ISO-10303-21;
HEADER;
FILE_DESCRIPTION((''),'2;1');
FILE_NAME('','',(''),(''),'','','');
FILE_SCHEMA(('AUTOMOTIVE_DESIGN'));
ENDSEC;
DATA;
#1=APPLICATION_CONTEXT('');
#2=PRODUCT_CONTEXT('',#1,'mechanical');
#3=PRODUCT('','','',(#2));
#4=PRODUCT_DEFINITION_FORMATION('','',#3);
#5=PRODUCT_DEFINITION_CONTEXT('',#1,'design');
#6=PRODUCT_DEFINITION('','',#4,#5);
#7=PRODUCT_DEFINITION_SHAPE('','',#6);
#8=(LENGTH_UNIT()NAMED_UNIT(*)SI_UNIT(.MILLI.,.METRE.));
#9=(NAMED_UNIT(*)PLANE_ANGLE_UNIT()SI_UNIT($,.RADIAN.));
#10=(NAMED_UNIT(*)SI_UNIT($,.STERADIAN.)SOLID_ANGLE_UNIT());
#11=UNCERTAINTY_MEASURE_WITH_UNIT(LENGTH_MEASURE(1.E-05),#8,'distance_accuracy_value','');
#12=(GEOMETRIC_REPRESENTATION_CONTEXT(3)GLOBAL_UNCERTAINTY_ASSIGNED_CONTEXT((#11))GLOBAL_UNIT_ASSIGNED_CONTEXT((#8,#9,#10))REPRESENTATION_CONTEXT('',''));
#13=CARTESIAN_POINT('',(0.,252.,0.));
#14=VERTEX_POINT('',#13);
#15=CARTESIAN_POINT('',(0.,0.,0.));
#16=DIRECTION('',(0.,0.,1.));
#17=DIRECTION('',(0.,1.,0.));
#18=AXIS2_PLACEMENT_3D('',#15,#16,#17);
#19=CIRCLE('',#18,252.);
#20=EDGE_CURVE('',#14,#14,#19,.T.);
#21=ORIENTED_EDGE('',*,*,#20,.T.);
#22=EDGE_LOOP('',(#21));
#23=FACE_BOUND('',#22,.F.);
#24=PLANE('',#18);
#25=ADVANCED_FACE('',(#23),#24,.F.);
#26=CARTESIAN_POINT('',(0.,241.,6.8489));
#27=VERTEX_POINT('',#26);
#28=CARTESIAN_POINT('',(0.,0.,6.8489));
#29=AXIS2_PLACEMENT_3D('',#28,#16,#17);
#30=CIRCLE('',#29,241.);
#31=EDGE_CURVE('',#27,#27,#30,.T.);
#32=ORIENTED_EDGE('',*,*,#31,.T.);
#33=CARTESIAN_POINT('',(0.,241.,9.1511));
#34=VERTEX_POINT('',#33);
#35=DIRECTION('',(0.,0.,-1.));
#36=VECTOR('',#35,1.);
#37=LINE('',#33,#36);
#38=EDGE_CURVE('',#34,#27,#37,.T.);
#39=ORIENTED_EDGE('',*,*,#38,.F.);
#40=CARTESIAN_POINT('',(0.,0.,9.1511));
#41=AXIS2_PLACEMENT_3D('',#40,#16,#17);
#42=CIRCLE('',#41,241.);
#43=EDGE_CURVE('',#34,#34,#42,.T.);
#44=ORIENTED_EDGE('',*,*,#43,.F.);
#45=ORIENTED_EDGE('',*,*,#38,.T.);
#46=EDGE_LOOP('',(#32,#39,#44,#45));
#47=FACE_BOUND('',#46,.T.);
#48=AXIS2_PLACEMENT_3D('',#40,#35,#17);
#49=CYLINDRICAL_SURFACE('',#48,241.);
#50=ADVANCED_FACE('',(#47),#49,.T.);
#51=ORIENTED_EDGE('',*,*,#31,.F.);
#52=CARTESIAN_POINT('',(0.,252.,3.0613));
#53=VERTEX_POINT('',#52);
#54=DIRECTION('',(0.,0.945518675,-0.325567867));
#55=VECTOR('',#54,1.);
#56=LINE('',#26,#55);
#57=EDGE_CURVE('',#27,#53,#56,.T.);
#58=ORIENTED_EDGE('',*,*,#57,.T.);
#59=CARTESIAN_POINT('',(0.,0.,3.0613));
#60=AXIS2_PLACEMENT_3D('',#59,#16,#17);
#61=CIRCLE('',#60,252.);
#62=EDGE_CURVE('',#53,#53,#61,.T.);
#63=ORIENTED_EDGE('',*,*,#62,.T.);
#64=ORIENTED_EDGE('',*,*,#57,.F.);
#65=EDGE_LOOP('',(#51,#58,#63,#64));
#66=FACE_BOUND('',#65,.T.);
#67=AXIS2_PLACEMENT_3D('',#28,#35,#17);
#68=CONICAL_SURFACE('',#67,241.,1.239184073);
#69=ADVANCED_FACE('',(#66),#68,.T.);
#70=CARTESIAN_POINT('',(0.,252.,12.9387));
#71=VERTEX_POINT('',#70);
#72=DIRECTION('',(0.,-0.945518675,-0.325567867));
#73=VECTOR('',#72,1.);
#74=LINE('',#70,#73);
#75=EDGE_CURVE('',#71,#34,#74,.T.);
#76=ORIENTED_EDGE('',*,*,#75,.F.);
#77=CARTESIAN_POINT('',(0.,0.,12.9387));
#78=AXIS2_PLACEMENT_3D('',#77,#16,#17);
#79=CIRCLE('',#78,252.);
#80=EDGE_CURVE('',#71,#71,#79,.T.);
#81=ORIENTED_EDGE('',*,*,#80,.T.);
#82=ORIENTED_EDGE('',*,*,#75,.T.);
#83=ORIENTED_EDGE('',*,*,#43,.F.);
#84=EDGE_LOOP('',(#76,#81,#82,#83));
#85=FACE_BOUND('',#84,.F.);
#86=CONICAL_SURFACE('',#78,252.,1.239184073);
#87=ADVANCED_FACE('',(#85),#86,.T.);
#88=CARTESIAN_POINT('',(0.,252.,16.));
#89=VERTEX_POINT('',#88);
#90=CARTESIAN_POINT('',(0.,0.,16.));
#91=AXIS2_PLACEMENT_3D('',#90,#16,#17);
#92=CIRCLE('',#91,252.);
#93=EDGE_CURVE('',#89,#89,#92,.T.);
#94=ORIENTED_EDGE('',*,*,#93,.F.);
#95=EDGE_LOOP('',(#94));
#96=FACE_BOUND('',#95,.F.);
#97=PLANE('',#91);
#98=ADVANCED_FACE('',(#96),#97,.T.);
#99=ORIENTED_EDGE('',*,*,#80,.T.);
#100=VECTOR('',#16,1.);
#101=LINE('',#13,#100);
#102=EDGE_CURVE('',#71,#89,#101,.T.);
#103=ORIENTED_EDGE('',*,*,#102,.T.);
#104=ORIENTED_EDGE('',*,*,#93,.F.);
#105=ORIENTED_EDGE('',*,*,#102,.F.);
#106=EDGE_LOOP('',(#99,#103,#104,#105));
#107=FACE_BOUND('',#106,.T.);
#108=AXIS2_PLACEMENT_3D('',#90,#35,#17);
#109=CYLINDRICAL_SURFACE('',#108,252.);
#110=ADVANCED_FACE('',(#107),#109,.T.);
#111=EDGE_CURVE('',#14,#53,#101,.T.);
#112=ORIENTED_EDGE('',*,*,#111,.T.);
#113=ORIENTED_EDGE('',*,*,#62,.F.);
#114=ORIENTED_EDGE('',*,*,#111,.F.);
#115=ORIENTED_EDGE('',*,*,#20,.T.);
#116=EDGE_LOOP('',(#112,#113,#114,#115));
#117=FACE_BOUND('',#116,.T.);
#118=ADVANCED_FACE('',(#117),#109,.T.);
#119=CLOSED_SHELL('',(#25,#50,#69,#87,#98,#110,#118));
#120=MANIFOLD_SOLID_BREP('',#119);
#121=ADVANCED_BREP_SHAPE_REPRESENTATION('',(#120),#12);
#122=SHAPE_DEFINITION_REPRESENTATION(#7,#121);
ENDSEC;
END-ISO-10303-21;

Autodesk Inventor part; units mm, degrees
ref_plane "YZ Plane" through (0, 0, 0) normal (1, 0, 0) x (0, 1, 0)
ref_plane "XZ Plane" through (0, 0, 0) normal (0, 1, 0) x (-1, 0, 0)
sketch "Main Sketch" plane through (0, 0, 0) normal (1, 0, 0) x (0, 1, 0)
  line L0 (0, 16) -> (252, 16)
  line L1 (252, 16) -> (252, 12.9387)
  line L2 (252, 12.9387) -> (241, 9.1511)
  line L3 (241, 9.1511) -> (241, 6.8489)
  line L4 (241, 6.8489) -> (252, 3.0613)
  line L5 (252, 3.0613) -> (252, 0)
  line L6 (252, 0) -> (0, 0)
  line L7 (250, 12.25) -> (250, 3.75) construction
  line L8 (241, 8) -> (250, 8) construction
  line L9 (252, 12.9387) -> (252, 3.0613)
  line L10 (0, -4) -> (0, 24) projected
  line L11 (0, 0) -> (0, 16)
  dimension "d0" = 8.5
  dimension "d1" = 38
  dimension "d2" = 2
  dimension "d6" = 16
  dimension "d21" = 500
  dimension "d25" = 11
  dimension "d27" = 8
ref_plane "Belt Plane" through (0, 241, 8) normal (0, 0, 1) x (1, 0, 0)
revolve "Body" add sketch "Main Sketch" angle 360 about axis through (0, 0, -10) along (0, 0, 1)
revolve "Groove" cut sketch "Main Sketch" angle 360 about axis through (0, 0, -10) along (0, 0, 1) contours L9 L4 L3 L2
fillet "Fillet External" [suppressed]
fillet "Fillet Internal" [suppressed]
pattern_of_one "Groove Pattern"
equation "\"d0\" = da_Bw"
equation "\"d1\" = da_Alfa"
equation "\"d2\" = da_c"
equation "\"d21\" = da_Dw"
equation "\"d25\" = da_Hd"
equation "\"d27\" = da_Se"
equation "\"da_r1\" = 0"
equation "\"da_r2\" = 0"
equation "\"d18\" = da_Sg"
equation "\"d5\" = da_Se"
equation "\"da_Bw\" = 8.5"
equation "\"da_Alfa\" = 38deg"
equation "\"da_c\" = 2"
equation "\"da_Dw\" = 500"
equation "\"da_Hd\" = 11"
equation "\"da_Se\" = 8"
equation "\"da_Sg\" = 12"
properties part number "Grooved Pulley2" material "Steel"
